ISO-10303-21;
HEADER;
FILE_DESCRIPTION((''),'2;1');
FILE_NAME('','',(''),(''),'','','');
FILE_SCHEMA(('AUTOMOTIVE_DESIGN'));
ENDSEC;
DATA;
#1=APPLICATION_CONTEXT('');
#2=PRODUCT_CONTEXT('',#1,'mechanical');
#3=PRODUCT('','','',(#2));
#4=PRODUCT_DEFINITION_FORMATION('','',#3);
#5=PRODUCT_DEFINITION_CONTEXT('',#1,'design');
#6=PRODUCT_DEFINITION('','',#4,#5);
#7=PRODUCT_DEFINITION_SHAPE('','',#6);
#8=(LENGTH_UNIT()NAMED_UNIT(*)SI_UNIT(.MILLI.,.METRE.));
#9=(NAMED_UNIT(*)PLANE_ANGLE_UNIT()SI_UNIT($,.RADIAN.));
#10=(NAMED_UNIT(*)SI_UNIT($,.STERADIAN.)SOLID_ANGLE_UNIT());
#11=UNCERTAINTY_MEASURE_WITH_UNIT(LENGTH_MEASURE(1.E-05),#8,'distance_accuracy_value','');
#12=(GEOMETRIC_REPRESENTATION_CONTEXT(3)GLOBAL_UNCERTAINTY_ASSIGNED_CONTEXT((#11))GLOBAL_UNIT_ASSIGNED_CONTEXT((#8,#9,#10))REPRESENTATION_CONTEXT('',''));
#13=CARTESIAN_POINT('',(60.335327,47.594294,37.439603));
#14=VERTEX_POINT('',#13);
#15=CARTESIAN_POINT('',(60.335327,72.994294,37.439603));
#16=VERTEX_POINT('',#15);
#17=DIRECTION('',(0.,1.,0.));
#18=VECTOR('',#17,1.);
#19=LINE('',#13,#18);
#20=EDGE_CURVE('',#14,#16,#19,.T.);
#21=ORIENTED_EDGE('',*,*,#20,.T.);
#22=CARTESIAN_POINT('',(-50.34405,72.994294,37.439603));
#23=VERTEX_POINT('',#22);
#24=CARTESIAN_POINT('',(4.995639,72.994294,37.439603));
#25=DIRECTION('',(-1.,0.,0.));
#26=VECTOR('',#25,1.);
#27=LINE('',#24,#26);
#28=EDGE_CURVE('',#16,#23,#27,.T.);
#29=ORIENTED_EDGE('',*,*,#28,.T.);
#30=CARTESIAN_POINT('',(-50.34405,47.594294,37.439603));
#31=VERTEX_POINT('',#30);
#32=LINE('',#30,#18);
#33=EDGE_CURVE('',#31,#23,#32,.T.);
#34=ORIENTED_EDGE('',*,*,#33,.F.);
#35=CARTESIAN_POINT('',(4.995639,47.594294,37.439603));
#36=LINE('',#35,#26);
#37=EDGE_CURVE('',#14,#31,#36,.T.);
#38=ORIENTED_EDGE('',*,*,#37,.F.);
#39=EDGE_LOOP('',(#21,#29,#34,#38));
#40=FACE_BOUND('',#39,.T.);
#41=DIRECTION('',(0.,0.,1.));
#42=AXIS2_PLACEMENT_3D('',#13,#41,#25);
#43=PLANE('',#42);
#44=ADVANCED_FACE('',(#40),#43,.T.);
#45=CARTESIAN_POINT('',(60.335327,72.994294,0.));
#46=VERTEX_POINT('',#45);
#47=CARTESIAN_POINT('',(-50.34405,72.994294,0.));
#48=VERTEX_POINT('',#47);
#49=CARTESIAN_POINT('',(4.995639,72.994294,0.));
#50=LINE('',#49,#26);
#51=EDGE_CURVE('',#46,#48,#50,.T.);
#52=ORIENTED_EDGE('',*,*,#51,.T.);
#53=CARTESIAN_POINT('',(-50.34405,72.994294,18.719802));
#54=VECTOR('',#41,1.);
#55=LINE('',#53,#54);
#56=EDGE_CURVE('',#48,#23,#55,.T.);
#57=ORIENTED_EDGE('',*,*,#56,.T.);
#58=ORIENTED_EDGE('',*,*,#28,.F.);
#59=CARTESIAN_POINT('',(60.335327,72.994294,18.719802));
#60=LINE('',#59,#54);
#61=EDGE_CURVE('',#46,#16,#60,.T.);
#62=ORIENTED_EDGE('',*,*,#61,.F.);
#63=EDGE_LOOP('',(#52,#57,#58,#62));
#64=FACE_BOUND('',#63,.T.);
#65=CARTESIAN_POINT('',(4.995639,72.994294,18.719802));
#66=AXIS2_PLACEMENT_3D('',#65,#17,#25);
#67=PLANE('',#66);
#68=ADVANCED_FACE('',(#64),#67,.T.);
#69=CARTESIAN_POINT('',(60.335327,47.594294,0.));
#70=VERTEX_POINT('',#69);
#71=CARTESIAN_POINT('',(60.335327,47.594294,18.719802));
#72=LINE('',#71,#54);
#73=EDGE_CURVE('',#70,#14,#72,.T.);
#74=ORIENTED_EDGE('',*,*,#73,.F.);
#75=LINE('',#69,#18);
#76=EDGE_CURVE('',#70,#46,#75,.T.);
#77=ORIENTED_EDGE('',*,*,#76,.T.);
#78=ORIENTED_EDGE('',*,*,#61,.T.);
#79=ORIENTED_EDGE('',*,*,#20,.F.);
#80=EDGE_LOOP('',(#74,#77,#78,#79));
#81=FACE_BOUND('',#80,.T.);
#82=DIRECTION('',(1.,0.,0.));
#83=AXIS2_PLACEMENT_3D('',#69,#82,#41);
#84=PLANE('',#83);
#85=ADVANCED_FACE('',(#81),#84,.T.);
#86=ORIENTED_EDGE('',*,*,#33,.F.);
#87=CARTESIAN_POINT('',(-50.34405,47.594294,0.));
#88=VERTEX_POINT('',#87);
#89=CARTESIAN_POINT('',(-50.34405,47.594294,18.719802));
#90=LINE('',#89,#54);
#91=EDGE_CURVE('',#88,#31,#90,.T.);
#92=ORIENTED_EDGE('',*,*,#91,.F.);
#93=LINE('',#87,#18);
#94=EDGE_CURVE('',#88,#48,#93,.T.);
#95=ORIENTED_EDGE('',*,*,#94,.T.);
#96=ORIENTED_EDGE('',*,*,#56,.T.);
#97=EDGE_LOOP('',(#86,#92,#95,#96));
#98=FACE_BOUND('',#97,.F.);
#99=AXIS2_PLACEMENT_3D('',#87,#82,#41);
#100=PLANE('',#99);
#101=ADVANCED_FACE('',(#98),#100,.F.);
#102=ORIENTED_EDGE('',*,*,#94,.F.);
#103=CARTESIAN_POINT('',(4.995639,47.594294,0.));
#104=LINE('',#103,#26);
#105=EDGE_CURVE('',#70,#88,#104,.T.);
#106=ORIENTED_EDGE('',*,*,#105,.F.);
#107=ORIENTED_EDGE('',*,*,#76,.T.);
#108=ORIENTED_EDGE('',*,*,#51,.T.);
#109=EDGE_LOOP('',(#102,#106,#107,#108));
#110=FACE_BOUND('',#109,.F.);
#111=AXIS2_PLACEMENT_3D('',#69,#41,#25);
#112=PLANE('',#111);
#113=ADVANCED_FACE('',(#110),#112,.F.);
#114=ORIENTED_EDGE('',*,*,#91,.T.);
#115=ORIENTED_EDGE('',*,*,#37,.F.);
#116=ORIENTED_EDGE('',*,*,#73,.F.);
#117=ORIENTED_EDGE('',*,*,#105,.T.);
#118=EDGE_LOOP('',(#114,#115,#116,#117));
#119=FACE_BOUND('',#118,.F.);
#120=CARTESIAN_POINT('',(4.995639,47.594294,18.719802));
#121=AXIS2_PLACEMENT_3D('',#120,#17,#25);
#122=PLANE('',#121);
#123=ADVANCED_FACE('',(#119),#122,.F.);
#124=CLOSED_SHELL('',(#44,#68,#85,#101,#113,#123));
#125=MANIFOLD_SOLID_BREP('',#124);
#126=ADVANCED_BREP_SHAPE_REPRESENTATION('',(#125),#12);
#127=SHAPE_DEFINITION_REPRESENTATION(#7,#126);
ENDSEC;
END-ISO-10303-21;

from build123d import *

# Parameters (mm, degrees)
F1_E0_W  = 110.6793768704
F1_E0_H  = 37.4396033585
F2_DEPTH = 25.4


with BuildPart() as f2:
    # F1_E0 (on explicit) → F2 (new body)
    with BuildSketch(Plane(origin=(60.3353269398, 47.594293952, 0), x_dir=(-1, 0, 0), z_dir=(0, 1, 0))):
        with Locations((55.3396884352, 18.7198016793)):
            Rectangle(F1_E0_W, F1_E0_H)
    extrude(amount=F2_DEPTH)


solid = f2.part
